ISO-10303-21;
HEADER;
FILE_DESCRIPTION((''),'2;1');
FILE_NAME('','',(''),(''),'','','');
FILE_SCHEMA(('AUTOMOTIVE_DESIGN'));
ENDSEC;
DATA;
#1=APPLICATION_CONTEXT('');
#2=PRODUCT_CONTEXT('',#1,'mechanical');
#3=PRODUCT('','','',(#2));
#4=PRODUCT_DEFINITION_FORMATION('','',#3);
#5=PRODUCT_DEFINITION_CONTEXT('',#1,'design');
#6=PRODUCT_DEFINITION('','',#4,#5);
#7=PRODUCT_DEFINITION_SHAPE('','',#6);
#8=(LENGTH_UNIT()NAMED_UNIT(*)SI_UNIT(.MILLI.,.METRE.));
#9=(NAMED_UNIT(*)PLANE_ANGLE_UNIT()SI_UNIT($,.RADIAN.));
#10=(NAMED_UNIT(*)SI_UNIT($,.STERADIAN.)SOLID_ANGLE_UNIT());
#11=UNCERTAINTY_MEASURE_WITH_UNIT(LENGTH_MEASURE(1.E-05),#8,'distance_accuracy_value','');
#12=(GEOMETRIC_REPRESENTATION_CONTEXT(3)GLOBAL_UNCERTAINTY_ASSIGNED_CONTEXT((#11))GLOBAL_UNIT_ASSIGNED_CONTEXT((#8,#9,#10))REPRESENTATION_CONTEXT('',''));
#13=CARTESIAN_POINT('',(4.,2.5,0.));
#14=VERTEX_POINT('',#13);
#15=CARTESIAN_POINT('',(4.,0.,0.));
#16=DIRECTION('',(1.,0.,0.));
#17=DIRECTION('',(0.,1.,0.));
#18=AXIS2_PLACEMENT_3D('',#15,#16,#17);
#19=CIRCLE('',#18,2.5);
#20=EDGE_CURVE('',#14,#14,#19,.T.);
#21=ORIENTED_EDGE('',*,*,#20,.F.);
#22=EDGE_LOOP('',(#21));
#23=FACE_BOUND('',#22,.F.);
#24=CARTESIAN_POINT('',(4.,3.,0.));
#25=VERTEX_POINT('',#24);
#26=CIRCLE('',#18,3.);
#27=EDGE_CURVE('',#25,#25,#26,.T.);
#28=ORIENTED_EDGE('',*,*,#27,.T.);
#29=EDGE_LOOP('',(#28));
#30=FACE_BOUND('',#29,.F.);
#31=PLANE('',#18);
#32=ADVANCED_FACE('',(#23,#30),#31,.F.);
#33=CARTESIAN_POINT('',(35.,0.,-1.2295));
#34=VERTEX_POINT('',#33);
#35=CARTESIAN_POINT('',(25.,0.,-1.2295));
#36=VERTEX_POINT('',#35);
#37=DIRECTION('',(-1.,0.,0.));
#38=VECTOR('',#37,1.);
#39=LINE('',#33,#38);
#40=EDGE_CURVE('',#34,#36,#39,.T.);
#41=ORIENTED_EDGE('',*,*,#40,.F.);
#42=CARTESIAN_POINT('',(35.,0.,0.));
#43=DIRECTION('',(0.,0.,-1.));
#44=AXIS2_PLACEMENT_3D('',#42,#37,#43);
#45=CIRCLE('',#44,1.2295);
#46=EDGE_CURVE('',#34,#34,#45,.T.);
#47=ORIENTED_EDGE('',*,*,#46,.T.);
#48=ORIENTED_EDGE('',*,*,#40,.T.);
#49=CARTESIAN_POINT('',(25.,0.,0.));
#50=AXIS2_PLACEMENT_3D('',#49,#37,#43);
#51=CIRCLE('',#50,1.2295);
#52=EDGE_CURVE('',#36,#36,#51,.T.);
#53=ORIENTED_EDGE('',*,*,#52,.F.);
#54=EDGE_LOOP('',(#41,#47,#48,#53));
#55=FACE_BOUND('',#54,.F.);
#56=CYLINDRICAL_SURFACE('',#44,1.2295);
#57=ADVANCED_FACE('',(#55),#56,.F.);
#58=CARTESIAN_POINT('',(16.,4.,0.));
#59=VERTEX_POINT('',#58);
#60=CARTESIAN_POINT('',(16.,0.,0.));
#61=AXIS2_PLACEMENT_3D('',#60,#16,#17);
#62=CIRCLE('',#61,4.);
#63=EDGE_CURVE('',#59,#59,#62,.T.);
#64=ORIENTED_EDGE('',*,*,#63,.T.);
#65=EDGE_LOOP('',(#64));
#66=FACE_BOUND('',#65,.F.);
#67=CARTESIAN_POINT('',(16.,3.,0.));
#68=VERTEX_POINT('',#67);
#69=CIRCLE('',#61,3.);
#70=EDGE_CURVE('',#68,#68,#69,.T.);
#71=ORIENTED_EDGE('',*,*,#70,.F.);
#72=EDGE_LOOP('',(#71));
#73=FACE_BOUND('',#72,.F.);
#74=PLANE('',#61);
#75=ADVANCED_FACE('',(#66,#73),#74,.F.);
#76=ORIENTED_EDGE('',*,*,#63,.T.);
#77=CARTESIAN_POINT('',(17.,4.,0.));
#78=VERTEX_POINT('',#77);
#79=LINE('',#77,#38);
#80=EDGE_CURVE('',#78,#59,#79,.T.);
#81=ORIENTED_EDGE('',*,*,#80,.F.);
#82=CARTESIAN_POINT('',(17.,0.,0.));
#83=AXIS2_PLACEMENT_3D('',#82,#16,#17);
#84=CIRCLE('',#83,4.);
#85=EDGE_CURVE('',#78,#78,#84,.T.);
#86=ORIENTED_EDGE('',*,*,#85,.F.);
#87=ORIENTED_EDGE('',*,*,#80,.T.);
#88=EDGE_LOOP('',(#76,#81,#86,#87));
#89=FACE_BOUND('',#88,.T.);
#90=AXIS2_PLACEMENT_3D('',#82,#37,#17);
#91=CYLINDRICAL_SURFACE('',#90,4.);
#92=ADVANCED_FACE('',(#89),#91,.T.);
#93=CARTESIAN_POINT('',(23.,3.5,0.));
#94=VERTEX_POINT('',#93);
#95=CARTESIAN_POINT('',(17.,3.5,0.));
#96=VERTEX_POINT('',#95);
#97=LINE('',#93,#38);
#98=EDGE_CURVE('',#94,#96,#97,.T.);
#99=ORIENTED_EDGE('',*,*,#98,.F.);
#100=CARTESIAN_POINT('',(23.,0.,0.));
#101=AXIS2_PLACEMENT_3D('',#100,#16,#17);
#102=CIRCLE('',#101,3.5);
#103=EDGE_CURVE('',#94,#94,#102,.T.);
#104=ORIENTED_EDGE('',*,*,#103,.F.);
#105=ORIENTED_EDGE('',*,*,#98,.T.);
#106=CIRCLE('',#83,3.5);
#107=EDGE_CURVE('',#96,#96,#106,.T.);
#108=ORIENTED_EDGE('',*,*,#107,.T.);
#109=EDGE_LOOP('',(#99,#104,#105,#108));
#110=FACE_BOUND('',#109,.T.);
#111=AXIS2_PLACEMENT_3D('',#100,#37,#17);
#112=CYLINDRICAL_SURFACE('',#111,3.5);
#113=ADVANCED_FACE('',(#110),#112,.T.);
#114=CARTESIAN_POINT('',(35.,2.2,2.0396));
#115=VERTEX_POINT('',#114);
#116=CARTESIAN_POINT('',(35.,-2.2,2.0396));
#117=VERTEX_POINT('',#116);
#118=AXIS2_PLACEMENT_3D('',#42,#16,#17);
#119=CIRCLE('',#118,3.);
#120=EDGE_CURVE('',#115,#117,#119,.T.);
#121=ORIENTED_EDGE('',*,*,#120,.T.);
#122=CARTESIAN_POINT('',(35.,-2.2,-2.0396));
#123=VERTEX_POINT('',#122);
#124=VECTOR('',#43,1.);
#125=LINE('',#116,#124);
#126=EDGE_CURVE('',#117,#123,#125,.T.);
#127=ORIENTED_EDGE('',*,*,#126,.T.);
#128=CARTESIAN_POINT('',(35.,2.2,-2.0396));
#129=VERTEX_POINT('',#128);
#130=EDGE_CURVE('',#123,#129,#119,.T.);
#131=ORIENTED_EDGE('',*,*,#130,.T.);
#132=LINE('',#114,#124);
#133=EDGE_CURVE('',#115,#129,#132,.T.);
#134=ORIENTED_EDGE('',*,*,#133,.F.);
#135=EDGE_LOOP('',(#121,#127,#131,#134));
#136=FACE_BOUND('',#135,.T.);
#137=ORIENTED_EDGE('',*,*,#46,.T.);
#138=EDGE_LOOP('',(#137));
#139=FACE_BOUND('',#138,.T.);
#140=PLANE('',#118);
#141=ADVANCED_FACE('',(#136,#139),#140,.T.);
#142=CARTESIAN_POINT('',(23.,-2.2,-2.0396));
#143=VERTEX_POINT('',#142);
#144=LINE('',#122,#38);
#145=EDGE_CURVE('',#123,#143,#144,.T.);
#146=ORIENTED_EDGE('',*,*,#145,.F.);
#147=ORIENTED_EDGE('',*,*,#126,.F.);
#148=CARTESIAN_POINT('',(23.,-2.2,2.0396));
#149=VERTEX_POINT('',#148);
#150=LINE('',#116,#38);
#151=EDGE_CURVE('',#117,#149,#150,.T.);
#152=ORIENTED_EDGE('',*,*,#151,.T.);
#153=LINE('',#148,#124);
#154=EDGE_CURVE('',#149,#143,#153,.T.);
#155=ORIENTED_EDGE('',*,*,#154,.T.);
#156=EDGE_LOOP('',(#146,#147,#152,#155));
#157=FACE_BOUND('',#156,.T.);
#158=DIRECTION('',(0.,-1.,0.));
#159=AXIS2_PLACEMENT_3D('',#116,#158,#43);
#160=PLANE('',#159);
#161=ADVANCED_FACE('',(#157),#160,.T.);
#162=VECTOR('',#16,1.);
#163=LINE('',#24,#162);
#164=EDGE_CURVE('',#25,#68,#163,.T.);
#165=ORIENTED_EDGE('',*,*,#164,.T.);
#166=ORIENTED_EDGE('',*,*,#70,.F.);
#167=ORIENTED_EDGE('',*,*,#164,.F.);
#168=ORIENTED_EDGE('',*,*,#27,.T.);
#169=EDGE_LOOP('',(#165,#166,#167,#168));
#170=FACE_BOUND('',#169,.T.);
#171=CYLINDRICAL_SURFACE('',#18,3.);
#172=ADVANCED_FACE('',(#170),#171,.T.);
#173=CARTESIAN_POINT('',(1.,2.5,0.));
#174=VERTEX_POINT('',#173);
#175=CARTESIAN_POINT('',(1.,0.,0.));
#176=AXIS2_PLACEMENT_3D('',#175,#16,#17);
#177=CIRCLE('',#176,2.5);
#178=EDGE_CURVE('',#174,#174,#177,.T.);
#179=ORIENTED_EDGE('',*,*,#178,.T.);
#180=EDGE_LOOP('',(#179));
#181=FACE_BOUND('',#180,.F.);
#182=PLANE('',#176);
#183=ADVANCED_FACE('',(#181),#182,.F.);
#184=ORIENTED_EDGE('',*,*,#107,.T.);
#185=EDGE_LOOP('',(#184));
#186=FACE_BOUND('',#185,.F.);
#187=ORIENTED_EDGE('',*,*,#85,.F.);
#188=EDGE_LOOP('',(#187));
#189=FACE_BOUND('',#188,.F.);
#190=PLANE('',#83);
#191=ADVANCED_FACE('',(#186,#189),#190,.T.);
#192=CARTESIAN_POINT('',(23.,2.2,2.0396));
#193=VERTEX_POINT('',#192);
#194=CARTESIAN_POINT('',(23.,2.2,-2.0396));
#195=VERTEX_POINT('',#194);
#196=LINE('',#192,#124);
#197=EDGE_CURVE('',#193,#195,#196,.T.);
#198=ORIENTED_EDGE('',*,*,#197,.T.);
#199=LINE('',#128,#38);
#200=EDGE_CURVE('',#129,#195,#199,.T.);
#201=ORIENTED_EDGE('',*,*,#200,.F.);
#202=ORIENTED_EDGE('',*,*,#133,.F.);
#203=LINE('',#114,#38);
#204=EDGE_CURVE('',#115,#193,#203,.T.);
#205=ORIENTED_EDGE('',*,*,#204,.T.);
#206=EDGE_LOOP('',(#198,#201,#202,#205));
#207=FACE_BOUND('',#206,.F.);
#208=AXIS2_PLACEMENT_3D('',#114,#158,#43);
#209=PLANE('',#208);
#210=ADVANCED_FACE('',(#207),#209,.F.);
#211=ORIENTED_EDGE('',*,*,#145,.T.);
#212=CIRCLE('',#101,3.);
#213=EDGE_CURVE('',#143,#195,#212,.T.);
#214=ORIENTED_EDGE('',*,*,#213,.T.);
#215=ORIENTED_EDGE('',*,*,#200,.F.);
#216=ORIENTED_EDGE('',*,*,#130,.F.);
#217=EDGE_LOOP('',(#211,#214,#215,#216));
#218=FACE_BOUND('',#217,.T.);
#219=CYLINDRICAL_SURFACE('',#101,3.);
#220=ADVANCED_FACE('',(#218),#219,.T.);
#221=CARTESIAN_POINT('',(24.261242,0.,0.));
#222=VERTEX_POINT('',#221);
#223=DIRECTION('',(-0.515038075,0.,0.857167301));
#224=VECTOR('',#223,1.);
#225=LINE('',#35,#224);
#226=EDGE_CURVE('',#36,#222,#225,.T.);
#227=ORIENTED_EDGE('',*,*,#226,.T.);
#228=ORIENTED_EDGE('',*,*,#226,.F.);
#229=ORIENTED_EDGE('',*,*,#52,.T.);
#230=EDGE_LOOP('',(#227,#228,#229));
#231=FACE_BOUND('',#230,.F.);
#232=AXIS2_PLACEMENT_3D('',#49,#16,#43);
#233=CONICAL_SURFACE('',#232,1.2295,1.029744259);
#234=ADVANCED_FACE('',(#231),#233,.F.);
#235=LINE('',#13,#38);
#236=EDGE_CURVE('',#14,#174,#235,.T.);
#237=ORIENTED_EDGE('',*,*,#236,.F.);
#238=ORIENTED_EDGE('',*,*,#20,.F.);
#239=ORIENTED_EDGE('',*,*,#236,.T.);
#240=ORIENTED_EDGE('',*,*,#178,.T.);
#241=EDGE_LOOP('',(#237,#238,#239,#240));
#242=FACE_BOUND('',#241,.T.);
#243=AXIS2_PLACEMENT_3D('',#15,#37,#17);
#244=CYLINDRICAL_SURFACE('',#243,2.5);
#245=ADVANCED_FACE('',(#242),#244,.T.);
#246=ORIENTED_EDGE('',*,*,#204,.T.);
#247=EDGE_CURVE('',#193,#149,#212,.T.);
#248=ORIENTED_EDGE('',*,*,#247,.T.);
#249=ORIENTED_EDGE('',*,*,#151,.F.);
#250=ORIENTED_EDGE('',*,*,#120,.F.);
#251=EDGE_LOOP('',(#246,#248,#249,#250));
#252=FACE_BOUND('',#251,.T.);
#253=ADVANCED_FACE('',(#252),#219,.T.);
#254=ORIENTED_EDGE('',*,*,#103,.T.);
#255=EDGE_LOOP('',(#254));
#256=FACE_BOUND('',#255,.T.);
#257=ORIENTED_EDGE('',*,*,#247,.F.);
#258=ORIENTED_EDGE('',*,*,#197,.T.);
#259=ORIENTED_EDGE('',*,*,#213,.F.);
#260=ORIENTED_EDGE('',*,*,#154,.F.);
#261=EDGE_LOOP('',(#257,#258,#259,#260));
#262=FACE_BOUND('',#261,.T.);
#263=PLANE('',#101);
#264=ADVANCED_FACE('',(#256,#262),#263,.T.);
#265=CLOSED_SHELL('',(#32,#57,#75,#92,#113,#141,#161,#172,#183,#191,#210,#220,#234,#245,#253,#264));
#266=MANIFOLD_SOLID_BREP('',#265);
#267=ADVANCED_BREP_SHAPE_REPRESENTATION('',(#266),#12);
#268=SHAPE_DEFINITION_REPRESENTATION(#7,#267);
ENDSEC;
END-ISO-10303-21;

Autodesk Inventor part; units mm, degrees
ref_plane "YZ Plane" through (0, 0, 0) normal (1, 0, 0) x (0, 1, 0)
ref_plane "XZ Plane" through (0, 0, 0) normal (0, 1, 0) x (-1, 0, 0)
ref_plane "XY Plane" through (0, 0, 0) normal (0, 0, 1) x (1, 0, 0)
sketch "Sketch1" plane through (0, 0, 0) normal (0, 0, 1) x (1, 0, 0)
  line L0 (4, 3) -> (6, 3)
  line L1 (6, 3) -> (6, 3)
  line L2 (16.5, 3.5) -> (16.5, 3.5)
  line L3 (35, 3) -> (35, 0)
  line L4 (4, 3) -> (4, 2.5)
  line L5 (4, 2.5) -> (1, 2.5)
  line L6 (1, 2.5) -> (1, 0)
  line L7 (1, 0) -> (35, 0)
  line L8 (23, 3) -> (35, 3)
  line L9 (23, 3.5) -> (17, 3.5)
  line L10 (23, 3.5) -> (23, 3)
  line L11 (17, 3.5) -> (17, 4)
  line L12 (17, 4) -> (16, 4)
  line L13 (16, 4) -> (16, 3)
  line L14 (6, 3) -> (16, 3)
  point P0 (0, 0)
  dimension "d1" = 2
  dimension "d25" = 3
  dimension "d26" = 2.5
  dimension "d40" = 12
  dimension "d41" = 3
  dimension "d42" = 0.5
  dimension "d44" = 6
  dimension "d45" = 1
  dimension "d46" = 10
  dimension "d47" = 3
  dimension "d48" = 3
revolve "Revolution2" add sketch "Sketch1" angle 360 about axis through (1, 0, 0) along (1, 0, 0)
sketch "Sketch3" plane through (35, 0, 0) normal (1, 0, 0) x (0, 0, -1)
  circle A0 centre (0, 0) radius 3 projected
  line L0 (-1.6583, 2.5) -> (1.6583, 2.5)
  line L1 (-1.6583, -2.5) -> (1.6583, -2.5)
  point P0 (0, 0)
  dimension "d21" = 0.5
  dimension "d31" = 0.5
extrude "Extrusion2" [suppressed]
sketch "Sketch4" plane through (4, 0, 0) normal (-1, 0, 0) x (0, 0, 1)
  line L0 (-1.6583, 2.5) -> (1.6583, 2.5)
  circle A0 centre (0, 0) radius 3 projected
  line L1 (-1.6583, -2.5) -> (1.6583, -2.5)
  point P0 (0, 0)
  dimension "d27" = 0.5
  dimension "d30" = 0.5
extrude "Extrusion3" [suppressed]
sketch "Sketch5" plane through (35, 0, 0) normal (1, 0, 0) x (0, 0, -1)
  point P0 (0, 0)
  point P1 (0, 0)
hole "Hole1" at (35, 0, 0) direction (-1, 0, 0) diameter 2.459 depth 10 tip angle 118 thread size "M3x0.5" class "6H" standard "ISO Metric profile"
sketch "Sketch6" plane through (35, 0, 0) normal (1, 0, 0) x (0, 0, -1)
  circle A0 centre (0, 0) radius 1.2295 projected
  circle A1 centre (0, 0) radius 3 projected
  circle A2 centre (0, 0) radius 3 projected
  line L0 (-2.0396, 2.2) -> (2.0396, 2.2)
  line L1 (-2.0396, -2.2) -> (2.0396, -2.2)
  dimension "d56" = 2.2
  dimension "d57" = 2.2
extrude "Extrusion4" cut sketch "Sketch6" against normal up to surface (12 mm away) contours L0 A1 | A1 L1
equation "\"d57\" = d56"
properties part number "Wał koła" material "Aluminum 6061, Welded"
